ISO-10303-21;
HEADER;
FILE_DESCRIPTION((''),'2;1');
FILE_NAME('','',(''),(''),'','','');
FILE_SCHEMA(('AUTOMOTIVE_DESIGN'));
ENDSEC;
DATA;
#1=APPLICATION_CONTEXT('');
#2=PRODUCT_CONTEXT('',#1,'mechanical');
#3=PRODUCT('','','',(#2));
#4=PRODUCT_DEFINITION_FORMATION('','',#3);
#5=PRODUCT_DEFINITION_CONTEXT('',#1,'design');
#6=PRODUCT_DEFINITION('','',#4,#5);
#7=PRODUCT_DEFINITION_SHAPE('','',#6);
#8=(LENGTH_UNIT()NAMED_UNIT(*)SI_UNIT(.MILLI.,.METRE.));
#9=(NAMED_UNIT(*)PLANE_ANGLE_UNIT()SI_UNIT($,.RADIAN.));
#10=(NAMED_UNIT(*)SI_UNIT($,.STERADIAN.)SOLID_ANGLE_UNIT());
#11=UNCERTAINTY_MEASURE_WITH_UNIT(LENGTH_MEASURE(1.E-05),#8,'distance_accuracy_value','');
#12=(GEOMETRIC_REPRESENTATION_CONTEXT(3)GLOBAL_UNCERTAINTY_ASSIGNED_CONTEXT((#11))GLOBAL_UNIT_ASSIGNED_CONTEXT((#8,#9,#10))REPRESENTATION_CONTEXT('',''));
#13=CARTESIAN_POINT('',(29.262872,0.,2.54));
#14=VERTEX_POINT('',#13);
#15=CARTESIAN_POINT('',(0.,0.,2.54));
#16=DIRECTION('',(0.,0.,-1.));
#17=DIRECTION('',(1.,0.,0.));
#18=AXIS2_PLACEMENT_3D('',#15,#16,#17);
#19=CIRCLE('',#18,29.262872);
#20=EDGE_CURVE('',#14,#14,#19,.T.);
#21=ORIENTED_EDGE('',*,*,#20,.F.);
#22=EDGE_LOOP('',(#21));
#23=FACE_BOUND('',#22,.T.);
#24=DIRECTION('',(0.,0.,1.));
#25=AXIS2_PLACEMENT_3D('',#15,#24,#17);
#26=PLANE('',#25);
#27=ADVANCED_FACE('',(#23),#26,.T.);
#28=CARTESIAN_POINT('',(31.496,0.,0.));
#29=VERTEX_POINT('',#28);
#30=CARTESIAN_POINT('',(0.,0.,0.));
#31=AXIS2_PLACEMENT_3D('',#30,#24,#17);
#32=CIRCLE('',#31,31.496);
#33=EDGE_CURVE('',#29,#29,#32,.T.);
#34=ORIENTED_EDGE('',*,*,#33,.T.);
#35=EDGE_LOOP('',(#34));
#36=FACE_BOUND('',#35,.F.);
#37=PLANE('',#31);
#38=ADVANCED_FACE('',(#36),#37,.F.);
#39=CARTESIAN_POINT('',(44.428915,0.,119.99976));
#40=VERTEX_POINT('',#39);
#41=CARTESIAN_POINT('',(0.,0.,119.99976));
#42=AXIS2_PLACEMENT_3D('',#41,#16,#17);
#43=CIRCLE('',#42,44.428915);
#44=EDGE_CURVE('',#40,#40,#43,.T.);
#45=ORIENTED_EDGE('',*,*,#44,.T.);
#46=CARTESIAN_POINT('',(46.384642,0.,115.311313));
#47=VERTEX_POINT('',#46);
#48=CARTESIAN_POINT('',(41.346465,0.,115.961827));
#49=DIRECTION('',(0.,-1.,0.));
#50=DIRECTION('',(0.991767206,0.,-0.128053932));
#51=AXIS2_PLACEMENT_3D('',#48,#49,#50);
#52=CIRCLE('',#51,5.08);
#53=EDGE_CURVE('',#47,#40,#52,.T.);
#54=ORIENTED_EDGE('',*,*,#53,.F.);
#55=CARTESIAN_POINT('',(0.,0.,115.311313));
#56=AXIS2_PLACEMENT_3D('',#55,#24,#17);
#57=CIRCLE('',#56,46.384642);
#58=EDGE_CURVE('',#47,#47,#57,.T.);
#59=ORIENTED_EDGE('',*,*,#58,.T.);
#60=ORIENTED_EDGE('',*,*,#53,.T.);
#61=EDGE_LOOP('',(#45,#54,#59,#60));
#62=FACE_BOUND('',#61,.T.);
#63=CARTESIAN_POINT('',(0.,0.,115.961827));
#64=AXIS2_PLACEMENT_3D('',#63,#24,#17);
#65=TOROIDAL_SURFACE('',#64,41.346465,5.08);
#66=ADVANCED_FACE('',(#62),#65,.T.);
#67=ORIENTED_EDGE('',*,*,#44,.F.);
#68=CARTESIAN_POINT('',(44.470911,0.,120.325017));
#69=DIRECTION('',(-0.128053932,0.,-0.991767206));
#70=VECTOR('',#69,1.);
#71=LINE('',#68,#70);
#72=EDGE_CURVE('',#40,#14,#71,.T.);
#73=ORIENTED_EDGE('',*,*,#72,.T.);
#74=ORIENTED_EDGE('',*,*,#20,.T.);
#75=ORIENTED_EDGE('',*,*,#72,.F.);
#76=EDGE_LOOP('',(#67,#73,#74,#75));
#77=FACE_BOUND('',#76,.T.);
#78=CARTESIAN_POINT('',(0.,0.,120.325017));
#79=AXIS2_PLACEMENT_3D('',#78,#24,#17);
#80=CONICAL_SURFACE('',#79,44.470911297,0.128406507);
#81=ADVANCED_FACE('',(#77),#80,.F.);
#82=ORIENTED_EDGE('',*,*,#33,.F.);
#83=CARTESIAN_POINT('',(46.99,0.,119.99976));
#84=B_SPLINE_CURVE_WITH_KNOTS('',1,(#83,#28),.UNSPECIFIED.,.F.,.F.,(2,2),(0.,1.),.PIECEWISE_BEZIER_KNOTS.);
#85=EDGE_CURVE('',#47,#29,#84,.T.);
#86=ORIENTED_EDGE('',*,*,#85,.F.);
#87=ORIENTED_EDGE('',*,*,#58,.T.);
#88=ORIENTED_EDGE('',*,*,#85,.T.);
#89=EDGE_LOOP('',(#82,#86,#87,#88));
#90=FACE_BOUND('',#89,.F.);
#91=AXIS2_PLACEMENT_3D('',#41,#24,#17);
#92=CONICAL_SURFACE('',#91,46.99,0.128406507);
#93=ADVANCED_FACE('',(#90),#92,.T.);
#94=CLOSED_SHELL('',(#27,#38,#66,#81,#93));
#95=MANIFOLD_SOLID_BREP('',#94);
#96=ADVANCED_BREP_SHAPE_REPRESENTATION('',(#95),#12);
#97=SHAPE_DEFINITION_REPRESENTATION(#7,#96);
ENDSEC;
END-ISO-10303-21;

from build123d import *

# Parameters (mm, degrees)
F2_R = 46.99
F0_R = 31.496
F4_T = -2.54


# Not quite as in the source:
# - a fillet or chamfer that OpenCascade refuses, or shapes differently, is made with other operations: its cross-section is extruded or revolved along the edge and cut away or added


with BuildPart() as f3:
    # F2 (on offset) → F3 section 0
    with BuildSketch(Plane.XY.offset(119.99976)):
        Circle(F2_R)
    # F0 (on Top) → F3 section 1
    with BuildSketch(Plane.XY):
        Circle(F0_R)
    loft()

    # F4
    f4_openings = [f3.faces().sort_by_distance(p)[0] for p in [
        (0, 0, 119.99976),
    ]]
    offset(amount=F4_T, openings=f4_openings, kind=Kind.INTERSECTION)

    # F5: fillet of radius 5.08 on 1 edges, made by hand

    # F5_s1 → F5_t2 (revolve, cut)
    with BuildSketch(Plane.XZ):
        with BuildLine():
            ThreePointArc((46.3846421913, 115.3113133911), (46.0349113946, 117.9175544409), (44.4289151153, 119.99976))
            Line((44.4289151153, 119.99976), (46.99, 119.99976))
            Line((46.99, 119.99976), (46.3846421913, 115.3113133911))
        make_face()
    revolve(axis=Axis((0, 0, 119.99976), (0, 0, 1)), mode=Mode.SUBTRACT)


solid = f3.part
